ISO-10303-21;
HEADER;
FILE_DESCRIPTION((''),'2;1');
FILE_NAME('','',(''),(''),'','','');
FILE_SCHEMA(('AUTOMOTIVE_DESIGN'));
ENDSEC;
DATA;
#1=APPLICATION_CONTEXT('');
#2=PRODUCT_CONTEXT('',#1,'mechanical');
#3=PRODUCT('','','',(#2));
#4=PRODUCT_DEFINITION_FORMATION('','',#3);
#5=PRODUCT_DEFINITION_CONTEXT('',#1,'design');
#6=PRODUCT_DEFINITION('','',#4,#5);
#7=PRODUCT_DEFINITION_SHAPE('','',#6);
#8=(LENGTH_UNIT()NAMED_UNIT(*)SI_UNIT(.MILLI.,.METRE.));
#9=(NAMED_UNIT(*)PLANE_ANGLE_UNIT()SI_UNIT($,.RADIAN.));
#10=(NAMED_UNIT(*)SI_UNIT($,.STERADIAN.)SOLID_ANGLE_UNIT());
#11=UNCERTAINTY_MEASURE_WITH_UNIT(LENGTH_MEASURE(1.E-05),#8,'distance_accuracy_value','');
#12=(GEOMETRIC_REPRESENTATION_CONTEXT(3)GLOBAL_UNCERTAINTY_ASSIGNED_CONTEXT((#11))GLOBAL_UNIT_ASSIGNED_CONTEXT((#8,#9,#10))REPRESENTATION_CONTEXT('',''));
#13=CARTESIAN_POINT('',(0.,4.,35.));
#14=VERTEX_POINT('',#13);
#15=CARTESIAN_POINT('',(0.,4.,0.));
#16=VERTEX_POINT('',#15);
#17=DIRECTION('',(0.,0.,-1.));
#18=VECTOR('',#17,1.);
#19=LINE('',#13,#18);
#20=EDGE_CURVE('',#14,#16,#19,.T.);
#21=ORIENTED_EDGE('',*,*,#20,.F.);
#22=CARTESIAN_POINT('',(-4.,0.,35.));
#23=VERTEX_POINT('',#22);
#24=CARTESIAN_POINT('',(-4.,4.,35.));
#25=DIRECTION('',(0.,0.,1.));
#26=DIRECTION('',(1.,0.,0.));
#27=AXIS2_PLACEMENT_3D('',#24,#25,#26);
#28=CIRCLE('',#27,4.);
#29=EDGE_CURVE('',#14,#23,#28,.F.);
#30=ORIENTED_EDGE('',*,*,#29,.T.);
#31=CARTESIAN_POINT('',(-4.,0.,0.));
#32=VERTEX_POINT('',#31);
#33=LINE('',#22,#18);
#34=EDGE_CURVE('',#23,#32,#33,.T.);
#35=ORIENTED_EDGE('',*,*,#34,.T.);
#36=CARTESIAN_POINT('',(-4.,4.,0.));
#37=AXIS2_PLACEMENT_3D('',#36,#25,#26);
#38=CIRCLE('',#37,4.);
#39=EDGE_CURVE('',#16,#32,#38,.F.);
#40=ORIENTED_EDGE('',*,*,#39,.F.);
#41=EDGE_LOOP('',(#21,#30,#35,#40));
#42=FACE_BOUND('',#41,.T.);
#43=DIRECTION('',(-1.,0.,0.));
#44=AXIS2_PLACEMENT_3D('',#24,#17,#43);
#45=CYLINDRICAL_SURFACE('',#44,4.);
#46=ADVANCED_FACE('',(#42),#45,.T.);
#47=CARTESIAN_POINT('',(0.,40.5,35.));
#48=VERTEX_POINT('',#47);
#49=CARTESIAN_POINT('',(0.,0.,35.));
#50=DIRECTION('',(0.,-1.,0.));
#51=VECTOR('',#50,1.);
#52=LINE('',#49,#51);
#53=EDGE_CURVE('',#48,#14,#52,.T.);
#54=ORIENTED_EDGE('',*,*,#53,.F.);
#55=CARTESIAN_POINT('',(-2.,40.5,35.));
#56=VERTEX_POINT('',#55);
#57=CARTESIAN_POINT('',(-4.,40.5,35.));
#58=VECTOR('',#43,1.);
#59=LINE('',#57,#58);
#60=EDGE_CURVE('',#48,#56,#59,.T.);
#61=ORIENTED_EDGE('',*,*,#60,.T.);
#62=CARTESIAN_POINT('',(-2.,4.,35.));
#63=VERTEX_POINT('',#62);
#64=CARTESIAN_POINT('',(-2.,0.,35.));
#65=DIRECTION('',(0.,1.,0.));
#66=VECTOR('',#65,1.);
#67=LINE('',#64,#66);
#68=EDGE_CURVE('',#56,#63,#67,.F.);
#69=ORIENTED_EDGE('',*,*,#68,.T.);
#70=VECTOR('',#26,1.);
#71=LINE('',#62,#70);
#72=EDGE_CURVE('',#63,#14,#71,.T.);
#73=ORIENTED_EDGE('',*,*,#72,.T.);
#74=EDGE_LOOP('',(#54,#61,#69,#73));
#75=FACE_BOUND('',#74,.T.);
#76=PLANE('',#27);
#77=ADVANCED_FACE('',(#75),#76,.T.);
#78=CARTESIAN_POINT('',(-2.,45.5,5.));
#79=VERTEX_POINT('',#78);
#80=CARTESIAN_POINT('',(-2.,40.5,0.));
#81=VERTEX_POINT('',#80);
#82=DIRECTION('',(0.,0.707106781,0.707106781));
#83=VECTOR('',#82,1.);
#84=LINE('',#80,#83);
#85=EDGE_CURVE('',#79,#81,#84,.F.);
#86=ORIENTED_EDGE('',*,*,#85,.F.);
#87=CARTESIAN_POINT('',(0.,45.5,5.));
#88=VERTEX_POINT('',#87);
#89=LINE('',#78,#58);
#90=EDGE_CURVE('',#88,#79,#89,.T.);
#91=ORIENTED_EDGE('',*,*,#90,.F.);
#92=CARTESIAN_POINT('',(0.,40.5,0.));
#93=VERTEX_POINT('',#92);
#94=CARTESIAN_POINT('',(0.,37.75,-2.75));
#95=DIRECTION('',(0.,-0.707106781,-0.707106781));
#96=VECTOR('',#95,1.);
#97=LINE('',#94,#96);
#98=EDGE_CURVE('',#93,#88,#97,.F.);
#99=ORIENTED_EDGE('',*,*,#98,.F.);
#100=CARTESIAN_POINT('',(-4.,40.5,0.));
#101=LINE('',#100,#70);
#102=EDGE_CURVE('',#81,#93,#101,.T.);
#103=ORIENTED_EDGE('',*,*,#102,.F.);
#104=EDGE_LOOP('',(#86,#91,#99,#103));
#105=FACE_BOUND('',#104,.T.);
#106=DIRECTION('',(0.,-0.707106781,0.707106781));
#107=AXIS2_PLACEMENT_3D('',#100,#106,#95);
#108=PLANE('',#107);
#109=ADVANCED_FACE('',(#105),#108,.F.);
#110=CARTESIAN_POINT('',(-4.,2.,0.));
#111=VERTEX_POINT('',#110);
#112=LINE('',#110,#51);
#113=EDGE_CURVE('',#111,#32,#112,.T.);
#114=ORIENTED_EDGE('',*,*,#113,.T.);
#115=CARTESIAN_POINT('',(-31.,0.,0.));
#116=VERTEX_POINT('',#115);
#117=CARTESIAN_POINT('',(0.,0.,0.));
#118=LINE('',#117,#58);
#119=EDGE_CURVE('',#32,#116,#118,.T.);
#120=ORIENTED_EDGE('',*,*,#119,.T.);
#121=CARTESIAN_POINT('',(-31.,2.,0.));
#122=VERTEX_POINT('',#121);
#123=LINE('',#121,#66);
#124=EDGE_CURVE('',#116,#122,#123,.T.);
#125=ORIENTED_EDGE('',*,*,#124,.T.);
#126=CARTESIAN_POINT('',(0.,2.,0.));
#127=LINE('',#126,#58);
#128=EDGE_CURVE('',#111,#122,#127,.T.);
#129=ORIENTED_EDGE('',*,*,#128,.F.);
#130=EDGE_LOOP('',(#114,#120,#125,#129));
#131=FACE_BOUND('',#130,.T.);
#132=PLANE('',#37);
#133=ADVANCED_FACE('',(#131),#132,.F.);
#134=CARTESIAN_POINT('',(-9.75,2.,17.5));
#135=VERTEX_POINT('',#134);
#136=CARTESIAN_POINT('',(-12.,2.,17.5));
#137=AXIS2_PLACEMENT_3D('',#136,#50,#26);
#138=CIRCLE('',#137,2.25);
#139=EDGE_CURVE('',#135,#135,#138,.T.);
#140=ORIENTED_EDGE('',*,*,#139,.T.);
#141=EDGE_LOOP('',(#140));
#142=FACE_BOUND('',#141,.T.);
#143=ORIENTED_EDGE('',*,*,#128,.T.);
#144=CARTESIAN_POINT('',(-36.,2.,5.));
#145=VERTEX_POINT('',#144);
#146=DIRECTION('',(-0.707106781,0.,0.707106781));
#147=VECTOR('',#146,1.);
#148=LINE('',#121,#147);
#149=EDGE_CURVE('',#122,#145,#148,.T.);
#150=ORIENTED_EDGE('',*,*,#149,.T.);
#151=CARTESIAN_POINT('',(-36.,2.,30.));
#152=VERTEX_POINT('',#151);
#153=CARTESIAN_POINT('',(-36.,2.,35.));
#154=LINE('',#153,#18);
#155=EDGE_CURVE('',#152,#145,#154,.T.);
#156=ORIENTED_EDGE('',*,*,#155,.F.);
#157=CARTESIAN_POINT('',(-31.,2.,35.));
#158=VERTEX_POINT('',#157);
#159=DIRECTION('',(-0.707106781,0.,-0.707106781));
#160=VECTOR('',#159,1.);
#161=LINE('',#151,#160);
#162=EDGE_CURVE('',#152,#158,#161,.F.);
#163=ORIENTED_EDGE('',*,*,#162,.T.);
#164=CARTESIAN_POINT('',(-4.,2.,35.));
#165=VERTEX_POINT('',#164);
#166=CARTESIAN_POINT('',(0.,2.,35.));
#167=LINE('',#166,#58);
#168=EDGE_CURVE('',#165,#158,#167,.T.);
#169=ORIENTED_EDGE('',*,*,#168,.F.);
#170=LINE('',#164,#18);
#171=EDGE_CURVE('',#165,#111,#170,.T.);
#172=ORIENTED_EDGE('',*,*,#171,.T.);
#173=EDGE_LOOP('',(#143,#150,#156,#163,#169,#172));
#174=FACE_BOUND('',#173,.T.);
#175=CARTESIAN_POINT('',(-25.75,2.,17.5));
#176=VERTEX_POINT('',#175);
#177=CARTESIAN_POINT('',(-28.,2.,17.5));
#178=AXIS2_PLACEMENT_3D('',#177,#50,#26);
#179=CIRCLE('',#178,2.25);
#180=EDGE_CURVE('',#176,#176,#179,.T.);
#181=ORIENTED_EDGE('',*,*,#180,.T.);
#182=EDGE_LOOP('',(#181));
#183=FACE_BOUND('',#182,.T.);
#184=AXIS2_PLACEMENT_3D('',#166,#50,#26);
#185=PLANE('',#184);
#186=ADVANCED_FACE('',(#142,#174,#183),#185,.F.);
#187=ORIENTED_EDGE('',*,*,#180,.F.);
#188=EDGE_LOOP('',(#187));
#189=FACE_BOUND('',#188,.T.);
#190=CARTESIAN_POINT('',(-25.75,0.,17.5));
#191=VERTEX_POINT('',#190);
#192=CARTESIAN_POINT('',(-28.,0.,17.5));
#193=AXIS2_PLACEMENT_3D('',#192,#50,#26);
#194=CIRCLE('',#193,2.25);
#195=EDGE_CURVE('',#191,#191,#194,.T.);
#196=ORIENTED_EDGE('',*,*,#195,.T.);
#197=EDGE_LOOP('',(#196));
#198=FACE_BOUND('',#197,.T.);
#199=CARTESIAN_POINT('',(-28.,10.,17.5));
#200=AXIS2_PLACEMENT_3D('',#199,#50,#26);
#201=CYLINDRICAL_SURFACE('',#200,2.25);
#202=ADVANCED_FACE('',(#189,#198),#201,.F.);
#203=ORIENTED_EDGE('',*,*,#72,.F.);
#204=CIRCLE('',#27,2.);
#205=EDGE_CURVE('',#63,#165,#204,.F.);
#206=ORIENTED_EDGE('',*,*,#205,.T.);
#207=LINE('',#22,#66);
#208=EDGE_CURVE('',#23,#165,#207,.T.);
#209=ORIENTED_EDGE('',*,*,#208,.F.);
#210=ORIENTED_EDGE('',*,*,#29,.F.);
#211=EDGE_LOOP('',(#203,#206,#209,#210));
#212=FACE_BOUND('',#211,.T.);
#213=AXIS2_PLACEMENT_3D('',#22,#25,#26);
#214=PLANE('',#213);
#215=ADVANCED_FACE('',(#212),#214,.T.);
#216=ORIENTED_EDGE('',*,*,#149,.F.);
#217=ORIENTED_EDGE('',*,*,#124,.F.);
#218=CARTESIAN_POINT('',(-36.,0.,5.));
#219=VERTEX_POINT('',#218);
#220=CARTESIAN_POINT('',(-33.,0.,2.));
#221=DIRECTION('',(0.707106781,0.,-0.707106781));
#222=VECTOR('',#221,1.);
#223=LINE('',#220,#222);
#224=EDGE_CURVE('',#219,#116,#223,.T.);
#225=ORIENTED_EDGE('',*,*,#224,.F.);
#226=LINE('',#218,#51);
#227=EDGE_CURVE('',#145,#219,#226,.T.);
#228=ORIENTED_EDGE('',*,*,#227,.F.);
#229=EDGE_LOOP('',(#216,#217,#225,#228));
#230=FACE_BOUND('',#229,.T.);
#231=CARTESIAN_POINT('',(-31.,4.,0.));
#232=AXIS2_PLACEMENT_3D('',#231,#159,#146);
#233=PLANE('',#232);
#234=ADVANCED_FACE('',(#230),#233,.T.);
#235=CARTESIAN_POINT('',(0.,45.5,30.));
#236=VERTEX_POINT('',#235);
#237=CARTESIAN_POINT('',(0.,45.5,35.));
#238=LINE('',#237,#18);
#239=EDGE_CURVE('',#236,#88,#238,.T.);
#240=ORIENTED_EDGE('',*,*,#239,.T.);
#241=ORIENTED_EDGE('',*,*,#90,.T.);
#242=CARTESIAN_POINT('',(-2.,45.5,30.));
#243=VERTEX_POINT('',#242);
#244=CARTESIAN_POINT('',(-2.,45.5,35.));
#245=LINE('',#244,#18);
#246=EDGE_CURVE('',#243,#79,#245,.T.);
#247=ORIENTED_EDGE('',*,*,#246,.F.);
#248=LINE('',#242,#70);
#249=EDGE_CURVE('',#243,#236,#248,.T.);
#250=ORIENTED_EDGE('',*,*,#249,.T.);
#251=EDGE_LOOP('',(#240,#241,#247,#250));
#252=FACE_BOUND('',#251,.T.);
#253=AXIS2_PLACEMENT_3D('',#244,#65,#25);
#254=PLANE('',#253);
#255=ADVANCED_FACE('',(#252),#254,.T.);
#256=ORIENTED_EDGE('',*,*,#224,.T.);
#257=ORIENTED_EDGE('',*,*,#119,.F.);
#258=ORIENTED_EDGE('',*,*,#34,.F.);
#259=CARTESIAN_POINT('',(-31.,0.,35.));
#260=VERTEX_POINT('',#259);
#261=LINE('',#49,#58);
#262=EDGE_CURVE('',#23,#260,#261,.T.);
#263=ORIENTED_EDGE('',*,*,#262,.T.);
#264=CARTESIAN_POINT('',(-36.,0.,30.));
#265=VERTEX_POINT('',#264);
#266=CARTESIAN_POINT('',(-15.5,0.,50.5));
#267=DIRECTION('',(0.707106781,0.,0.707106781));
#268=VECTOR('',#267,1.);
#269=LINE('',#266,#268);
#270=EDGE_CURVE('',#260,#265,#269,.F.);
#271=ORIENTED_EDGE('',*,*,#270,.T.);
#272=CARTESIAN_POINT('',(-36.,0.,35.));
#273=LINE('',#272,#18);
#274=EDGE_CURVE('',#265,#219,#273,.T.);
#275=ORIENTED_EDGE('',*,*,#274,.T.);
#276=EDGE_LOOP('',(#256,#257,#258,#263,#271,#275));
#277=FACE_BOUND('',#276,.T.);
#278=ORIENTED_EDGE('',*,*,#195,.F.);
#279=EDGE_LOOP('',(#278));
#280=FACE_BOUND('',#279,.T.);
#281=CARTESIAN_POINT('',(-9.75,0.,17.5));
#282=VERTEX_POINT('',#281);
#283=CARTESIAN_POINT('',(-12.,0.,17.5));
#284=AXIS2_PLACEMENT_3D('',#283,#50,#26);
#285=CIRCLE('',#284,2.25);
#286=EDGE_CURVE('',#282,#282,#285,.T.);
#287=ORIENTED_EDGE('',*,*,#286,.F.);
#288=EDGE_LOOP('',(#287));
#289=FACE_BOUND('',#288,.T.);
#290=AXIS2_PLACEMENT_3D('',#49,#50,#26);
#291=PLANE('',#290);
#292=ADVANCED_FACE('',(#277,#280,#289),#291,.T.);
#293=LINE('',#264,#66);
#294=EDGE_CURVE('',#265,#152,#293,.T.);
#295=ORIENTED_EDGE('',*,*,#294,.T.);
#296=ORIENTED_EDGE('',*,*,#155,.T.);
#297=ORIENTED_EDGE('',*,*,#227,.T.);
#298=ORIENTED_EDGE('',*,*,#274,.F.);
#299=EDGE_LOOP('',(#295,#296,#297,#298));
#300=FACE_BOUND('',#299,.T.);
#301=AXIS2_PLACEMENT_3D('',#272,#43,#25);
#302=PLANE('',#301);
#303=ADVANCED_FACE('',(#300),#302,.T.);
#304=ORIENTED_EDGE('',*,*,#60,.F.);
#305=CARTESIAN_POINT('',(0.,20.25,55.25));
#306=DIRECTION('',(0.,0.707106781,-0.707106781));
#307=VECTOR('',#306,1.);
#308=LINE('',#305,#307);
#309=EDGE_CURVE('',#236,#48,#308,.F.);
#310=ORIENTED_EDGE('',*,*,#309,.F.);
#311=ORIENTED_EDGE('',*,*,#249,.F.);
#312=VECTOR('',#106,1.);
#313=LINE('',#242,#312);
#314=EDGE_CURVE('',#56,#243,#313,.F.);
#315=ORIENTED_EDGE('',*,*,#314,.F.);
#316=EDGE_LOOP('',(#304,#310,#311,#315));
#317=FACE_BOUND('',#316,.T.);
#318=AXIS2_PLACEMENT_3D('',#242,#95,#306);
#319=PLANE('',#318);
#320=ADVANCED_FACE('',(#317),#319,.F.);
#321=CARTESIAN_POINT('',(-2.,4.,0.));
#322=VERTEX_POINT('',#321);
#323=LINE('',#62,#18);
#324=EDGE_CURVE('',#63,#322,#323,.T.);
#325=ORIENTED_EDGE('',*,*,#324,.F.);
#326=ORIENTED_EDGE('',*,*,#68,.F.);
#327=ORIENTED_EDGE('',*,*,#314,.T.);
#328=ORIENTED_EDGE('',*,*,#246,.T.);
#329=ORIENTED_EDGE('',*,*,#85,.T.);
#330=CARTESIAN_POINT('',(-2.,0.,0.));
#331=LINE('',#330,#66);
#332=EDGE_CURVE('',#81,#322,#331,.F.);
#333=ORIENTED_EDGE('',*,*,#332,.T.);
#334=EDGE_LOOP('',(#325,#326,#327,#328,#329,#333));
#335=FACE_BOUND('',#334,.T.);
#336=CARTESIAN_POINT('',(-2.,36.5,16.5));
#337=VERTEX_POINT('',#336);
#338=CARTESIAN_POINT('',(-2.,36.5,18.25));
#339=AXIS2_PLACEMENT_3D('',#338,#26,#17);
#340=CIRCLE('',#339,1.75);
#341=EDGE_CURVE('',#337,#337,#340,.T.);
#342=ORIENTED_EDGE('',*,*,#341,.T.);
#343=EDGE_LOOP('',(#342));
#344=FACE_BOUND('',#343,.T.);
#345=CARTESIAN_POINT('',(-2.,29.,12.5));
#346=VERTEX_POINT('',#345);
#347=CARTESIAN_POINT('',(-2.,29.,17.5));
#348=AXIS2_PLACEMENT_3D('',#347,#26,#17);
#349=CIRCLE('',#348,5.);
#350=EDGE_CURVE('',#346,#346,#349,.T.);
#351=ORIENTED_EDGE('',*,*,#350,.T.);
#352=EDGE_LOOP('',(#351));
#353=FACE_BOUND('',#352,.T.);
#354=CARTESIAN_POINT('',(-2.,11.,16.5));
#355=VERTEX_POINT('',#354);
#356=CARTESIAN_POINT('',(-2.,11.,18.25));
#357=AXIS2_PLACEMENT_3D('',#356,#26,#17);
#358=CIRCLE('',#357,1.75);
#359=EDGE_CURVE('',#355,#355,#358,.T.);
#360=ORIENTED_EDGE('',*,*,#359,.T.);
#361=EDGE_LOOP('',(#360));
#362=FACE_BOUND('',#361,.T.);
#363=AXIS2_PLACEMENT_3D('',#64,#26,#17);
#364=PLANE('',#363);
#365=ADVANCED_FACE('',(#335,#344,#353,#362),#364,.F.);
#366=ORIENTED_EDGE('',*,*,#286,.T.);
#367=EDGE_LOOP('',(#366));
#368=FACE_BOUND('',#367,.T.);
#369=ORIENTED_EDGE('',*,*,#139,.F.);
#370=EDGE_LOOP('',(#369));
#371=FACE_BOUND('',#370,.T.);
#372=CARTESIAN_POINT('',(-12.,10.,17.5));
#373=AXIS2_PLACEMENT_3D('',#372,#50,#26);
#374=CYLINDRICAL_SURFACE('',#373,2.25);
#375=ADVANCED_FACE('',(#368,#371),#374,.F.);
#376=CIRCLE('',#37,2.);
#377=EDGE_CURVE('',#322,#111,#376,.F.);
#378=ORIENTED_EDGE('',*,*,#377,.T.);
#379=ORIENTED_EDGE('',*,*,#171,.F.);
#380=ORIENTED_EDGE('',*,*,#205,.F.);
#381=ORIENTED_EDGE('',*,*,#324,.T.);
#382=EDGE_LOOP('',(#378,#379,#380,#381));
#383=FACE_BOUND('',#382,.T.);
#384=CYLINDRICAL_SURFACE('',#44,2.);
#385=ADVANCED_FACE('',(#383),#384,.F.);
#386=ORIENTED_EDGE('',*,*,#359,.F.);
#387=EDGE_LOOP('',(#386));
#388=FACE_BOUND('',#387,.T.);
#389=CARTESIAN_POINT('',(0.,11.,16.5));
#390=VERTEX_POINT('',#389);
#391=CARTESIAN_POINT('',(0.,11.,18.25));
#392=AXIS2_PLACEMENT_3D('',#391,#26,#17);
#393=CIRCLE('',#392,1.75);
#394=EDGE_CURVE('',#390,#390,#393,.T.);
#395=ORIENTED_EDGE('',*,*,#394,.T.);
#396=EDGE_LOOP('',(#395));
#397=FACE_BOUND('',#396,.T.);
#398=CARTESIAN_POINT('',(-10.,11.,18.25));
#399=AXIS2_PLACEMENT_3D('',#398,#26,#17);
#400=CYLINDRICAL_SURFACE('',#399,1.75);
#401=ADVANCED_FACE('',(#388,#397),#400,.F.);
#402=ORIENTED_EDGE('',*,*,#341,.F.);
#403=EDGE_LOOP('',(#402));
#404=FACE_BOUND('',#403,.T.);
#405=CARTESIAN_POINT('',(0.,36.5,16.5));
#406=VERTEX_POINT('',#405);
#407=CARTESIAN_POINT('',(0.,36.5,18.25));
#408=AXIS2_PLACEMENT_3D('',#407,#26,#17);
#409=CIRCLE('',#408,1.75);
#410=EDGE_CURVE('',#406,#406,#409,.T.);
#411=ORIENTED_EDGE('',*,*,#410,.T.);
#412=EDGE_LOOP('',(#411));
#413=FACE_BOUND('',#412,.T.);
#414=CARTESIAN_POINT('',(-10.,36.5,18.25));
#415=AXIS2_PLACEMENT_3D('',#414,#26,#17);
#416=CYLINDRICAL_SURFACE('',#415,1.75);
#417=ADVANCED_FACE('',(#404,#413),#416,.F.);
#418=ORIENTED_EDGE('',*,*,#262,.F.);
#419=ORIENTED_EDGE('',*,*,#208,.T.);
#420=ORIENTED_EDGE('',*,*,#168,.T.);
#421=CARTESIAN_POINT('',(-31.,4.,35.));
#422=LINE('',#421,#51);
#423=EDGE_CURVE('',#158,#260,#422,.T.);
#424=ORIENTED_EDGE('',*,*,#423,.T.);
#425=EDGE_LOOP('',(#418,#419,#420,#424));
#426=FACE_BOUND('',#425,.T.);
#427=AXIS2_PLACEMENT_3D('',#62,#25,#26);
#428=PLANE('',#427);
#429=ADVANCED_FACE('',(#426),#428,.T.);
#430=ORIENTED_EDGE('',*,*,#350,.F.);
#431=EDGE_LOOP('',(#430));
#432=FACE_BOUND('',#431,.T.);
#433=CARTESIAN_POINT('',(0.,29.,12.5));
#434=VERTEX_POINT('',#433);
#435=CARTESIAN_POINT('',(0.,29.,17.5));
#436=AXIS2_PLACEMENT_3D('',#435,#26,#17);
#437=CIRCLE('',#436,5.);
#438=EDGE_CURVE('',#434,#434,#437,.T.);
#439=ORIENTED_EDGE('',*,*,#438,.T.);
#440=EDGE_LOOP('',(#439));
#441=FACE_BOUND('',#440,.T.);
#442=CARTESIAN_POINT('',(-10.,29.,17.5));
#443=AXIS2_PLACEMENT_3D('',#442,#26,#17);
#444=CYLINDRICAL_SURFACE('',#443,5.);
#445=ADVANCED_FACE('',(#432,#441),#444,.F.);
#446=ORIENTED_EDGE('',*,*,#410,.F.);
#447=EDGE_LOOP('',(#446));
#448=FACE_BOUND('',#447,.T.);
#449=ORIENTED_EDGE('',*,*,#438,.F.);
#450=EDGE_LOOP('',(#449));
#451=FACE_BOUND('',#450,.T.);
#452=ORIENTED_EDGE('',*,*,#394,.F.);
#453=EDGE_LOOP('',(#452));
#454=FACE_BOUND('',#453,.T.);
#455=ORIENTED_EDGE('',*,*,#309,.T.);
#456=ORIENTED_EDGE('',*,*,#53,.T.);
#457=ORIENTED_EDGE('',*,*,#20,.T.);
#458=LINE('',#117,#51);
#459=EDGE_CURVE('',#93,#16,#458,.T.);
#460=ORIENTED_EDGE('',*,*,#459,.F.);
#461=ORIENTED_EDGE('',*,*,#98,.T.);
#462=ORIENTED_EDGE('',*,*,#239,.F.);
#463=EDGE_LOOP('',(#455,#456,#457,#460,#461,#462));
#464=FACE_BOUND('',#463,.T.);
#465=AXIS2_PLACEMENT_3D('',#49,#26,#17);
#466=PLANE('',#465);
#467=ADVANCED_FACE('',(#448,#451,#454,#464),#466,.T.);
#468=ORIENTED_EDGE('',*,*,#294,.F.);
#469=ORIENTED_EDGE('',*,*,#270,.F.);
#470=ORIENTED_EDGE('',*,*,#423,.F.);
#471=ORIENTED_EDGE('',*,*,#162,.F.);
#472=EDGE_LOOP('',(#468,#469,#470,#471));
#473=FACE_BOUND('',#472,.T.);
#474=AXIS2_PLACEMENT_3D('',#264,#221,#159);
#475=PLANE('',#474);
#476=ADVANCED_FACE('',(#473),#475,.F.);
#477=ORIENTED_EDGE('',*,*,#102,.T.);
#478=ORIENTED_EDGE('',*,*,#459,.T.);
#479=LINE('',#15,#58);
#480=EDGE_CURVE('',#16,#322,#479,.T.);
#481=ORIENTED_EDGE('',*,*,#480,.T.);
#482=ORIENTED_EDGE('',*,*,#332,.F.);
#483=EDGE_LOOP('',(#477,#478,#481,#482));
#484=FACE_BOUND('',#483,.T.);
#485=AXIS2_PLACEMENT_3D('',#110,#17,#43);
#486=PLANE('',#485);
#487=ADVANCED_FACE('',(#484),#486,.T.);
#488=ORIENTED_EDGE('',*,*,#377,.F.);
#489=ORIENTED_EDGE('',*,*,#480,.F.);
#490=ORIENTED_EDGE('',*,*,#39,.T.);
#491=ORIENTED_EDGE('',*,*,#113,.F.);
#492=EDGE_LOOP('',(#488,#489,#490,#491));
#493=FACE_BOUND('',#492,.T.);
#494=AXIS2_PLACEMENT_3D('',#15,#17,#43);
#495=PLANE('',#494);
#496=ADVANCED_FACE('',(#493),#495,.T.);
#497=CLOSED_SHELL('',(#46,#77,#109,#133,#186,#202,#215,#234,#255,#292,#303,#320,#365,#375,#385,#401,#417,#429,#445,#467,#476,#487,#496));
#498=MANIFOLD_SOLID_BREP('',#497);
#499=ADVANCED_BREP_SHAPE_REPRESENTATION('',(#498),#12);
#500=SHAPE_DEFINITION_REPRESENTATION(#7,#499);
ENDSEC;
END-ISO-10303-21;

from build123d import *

# Parameters (mm, degrees)
BASE_FLANGE1_DEPTH = 35
SKETCH3_R          = 5
SKETCH3_R_2        = 1.75
CUT_EXTRUDE1_DEPTH = 10
CHAMFER1_SIZE      = 5
SKETCH4_R          = 2.25
CUT_EXTRUDE2_DEPTH = 10


# Sheet-metal steps are written as plain solids
with BuildPart() as part:
    # Sketch1 → Base-Flange1 (new body)
    with BuildSketch(Plane.XY):
        with BuildLine():
            Line((-36, 0), (-4, 0))
            ThreePointArc((-4, 0), (-1.171572875, 1.171572875), (0, 4))
            Line((0, 4), (0, 45.5))
            Line((0, 45.5), (-2, 45.5))
            Line((-2, 45.5), (-2, 4))
            ThreePointArc((-2, 4), (-2.585786438, 2.585786438), (-4, 2))
            Line((-4, 2), (-36, 2))
            Line((-36, 2), (-36, 0))
        make_face()
    extrude(amount=BASE_FLANGE1_DEPTH)

    # Sketch3 → Cut-Extrude1 (cut)
    with BuildSketch(Plane(origin=(0, 0, 0), x_dir=(0, 0, -1), z_dir=(1, 0, 0))):
        with Locations((-17.5, 29)):
            Circle(SKETCH3_R)
        with Locations((-18.25, 11)):
            Circle(SKETCH3_R_2)
        with Locations((-18.25, 36.5)):
            Circle(SKETCH3_R_2)
    extrude(amount=-CUT_EXTRUDE1_DEPTH, mode=Mode.SUBTRACT)

    # Chamfer1
    chamfer1_edges = [part.edges().sort_by_distance(p)[0] for p in [
        (-1, 45.5, 35),
        (-36, 1, 35),
        (-1, 45.5, 0),
        (-36, 1, 0),
    ]]
    chamfer(chamfer1_edges, length=CHAMFER1_SIZE)

    # Sketch4 → Cut-Extrude2 (cut)
    with BuildSketch(Plane.XZ):
        with Locations((-28, 17.5)):
            Circle(SKETCH4_R)
        with Locations((-12, 17.5)):
            Circle(SKETCH4_R)
    extrude(amount=-CUT_EXTRUDE2_DEPTH, mode=Mode.SUBTRACT)


solid = part.part
